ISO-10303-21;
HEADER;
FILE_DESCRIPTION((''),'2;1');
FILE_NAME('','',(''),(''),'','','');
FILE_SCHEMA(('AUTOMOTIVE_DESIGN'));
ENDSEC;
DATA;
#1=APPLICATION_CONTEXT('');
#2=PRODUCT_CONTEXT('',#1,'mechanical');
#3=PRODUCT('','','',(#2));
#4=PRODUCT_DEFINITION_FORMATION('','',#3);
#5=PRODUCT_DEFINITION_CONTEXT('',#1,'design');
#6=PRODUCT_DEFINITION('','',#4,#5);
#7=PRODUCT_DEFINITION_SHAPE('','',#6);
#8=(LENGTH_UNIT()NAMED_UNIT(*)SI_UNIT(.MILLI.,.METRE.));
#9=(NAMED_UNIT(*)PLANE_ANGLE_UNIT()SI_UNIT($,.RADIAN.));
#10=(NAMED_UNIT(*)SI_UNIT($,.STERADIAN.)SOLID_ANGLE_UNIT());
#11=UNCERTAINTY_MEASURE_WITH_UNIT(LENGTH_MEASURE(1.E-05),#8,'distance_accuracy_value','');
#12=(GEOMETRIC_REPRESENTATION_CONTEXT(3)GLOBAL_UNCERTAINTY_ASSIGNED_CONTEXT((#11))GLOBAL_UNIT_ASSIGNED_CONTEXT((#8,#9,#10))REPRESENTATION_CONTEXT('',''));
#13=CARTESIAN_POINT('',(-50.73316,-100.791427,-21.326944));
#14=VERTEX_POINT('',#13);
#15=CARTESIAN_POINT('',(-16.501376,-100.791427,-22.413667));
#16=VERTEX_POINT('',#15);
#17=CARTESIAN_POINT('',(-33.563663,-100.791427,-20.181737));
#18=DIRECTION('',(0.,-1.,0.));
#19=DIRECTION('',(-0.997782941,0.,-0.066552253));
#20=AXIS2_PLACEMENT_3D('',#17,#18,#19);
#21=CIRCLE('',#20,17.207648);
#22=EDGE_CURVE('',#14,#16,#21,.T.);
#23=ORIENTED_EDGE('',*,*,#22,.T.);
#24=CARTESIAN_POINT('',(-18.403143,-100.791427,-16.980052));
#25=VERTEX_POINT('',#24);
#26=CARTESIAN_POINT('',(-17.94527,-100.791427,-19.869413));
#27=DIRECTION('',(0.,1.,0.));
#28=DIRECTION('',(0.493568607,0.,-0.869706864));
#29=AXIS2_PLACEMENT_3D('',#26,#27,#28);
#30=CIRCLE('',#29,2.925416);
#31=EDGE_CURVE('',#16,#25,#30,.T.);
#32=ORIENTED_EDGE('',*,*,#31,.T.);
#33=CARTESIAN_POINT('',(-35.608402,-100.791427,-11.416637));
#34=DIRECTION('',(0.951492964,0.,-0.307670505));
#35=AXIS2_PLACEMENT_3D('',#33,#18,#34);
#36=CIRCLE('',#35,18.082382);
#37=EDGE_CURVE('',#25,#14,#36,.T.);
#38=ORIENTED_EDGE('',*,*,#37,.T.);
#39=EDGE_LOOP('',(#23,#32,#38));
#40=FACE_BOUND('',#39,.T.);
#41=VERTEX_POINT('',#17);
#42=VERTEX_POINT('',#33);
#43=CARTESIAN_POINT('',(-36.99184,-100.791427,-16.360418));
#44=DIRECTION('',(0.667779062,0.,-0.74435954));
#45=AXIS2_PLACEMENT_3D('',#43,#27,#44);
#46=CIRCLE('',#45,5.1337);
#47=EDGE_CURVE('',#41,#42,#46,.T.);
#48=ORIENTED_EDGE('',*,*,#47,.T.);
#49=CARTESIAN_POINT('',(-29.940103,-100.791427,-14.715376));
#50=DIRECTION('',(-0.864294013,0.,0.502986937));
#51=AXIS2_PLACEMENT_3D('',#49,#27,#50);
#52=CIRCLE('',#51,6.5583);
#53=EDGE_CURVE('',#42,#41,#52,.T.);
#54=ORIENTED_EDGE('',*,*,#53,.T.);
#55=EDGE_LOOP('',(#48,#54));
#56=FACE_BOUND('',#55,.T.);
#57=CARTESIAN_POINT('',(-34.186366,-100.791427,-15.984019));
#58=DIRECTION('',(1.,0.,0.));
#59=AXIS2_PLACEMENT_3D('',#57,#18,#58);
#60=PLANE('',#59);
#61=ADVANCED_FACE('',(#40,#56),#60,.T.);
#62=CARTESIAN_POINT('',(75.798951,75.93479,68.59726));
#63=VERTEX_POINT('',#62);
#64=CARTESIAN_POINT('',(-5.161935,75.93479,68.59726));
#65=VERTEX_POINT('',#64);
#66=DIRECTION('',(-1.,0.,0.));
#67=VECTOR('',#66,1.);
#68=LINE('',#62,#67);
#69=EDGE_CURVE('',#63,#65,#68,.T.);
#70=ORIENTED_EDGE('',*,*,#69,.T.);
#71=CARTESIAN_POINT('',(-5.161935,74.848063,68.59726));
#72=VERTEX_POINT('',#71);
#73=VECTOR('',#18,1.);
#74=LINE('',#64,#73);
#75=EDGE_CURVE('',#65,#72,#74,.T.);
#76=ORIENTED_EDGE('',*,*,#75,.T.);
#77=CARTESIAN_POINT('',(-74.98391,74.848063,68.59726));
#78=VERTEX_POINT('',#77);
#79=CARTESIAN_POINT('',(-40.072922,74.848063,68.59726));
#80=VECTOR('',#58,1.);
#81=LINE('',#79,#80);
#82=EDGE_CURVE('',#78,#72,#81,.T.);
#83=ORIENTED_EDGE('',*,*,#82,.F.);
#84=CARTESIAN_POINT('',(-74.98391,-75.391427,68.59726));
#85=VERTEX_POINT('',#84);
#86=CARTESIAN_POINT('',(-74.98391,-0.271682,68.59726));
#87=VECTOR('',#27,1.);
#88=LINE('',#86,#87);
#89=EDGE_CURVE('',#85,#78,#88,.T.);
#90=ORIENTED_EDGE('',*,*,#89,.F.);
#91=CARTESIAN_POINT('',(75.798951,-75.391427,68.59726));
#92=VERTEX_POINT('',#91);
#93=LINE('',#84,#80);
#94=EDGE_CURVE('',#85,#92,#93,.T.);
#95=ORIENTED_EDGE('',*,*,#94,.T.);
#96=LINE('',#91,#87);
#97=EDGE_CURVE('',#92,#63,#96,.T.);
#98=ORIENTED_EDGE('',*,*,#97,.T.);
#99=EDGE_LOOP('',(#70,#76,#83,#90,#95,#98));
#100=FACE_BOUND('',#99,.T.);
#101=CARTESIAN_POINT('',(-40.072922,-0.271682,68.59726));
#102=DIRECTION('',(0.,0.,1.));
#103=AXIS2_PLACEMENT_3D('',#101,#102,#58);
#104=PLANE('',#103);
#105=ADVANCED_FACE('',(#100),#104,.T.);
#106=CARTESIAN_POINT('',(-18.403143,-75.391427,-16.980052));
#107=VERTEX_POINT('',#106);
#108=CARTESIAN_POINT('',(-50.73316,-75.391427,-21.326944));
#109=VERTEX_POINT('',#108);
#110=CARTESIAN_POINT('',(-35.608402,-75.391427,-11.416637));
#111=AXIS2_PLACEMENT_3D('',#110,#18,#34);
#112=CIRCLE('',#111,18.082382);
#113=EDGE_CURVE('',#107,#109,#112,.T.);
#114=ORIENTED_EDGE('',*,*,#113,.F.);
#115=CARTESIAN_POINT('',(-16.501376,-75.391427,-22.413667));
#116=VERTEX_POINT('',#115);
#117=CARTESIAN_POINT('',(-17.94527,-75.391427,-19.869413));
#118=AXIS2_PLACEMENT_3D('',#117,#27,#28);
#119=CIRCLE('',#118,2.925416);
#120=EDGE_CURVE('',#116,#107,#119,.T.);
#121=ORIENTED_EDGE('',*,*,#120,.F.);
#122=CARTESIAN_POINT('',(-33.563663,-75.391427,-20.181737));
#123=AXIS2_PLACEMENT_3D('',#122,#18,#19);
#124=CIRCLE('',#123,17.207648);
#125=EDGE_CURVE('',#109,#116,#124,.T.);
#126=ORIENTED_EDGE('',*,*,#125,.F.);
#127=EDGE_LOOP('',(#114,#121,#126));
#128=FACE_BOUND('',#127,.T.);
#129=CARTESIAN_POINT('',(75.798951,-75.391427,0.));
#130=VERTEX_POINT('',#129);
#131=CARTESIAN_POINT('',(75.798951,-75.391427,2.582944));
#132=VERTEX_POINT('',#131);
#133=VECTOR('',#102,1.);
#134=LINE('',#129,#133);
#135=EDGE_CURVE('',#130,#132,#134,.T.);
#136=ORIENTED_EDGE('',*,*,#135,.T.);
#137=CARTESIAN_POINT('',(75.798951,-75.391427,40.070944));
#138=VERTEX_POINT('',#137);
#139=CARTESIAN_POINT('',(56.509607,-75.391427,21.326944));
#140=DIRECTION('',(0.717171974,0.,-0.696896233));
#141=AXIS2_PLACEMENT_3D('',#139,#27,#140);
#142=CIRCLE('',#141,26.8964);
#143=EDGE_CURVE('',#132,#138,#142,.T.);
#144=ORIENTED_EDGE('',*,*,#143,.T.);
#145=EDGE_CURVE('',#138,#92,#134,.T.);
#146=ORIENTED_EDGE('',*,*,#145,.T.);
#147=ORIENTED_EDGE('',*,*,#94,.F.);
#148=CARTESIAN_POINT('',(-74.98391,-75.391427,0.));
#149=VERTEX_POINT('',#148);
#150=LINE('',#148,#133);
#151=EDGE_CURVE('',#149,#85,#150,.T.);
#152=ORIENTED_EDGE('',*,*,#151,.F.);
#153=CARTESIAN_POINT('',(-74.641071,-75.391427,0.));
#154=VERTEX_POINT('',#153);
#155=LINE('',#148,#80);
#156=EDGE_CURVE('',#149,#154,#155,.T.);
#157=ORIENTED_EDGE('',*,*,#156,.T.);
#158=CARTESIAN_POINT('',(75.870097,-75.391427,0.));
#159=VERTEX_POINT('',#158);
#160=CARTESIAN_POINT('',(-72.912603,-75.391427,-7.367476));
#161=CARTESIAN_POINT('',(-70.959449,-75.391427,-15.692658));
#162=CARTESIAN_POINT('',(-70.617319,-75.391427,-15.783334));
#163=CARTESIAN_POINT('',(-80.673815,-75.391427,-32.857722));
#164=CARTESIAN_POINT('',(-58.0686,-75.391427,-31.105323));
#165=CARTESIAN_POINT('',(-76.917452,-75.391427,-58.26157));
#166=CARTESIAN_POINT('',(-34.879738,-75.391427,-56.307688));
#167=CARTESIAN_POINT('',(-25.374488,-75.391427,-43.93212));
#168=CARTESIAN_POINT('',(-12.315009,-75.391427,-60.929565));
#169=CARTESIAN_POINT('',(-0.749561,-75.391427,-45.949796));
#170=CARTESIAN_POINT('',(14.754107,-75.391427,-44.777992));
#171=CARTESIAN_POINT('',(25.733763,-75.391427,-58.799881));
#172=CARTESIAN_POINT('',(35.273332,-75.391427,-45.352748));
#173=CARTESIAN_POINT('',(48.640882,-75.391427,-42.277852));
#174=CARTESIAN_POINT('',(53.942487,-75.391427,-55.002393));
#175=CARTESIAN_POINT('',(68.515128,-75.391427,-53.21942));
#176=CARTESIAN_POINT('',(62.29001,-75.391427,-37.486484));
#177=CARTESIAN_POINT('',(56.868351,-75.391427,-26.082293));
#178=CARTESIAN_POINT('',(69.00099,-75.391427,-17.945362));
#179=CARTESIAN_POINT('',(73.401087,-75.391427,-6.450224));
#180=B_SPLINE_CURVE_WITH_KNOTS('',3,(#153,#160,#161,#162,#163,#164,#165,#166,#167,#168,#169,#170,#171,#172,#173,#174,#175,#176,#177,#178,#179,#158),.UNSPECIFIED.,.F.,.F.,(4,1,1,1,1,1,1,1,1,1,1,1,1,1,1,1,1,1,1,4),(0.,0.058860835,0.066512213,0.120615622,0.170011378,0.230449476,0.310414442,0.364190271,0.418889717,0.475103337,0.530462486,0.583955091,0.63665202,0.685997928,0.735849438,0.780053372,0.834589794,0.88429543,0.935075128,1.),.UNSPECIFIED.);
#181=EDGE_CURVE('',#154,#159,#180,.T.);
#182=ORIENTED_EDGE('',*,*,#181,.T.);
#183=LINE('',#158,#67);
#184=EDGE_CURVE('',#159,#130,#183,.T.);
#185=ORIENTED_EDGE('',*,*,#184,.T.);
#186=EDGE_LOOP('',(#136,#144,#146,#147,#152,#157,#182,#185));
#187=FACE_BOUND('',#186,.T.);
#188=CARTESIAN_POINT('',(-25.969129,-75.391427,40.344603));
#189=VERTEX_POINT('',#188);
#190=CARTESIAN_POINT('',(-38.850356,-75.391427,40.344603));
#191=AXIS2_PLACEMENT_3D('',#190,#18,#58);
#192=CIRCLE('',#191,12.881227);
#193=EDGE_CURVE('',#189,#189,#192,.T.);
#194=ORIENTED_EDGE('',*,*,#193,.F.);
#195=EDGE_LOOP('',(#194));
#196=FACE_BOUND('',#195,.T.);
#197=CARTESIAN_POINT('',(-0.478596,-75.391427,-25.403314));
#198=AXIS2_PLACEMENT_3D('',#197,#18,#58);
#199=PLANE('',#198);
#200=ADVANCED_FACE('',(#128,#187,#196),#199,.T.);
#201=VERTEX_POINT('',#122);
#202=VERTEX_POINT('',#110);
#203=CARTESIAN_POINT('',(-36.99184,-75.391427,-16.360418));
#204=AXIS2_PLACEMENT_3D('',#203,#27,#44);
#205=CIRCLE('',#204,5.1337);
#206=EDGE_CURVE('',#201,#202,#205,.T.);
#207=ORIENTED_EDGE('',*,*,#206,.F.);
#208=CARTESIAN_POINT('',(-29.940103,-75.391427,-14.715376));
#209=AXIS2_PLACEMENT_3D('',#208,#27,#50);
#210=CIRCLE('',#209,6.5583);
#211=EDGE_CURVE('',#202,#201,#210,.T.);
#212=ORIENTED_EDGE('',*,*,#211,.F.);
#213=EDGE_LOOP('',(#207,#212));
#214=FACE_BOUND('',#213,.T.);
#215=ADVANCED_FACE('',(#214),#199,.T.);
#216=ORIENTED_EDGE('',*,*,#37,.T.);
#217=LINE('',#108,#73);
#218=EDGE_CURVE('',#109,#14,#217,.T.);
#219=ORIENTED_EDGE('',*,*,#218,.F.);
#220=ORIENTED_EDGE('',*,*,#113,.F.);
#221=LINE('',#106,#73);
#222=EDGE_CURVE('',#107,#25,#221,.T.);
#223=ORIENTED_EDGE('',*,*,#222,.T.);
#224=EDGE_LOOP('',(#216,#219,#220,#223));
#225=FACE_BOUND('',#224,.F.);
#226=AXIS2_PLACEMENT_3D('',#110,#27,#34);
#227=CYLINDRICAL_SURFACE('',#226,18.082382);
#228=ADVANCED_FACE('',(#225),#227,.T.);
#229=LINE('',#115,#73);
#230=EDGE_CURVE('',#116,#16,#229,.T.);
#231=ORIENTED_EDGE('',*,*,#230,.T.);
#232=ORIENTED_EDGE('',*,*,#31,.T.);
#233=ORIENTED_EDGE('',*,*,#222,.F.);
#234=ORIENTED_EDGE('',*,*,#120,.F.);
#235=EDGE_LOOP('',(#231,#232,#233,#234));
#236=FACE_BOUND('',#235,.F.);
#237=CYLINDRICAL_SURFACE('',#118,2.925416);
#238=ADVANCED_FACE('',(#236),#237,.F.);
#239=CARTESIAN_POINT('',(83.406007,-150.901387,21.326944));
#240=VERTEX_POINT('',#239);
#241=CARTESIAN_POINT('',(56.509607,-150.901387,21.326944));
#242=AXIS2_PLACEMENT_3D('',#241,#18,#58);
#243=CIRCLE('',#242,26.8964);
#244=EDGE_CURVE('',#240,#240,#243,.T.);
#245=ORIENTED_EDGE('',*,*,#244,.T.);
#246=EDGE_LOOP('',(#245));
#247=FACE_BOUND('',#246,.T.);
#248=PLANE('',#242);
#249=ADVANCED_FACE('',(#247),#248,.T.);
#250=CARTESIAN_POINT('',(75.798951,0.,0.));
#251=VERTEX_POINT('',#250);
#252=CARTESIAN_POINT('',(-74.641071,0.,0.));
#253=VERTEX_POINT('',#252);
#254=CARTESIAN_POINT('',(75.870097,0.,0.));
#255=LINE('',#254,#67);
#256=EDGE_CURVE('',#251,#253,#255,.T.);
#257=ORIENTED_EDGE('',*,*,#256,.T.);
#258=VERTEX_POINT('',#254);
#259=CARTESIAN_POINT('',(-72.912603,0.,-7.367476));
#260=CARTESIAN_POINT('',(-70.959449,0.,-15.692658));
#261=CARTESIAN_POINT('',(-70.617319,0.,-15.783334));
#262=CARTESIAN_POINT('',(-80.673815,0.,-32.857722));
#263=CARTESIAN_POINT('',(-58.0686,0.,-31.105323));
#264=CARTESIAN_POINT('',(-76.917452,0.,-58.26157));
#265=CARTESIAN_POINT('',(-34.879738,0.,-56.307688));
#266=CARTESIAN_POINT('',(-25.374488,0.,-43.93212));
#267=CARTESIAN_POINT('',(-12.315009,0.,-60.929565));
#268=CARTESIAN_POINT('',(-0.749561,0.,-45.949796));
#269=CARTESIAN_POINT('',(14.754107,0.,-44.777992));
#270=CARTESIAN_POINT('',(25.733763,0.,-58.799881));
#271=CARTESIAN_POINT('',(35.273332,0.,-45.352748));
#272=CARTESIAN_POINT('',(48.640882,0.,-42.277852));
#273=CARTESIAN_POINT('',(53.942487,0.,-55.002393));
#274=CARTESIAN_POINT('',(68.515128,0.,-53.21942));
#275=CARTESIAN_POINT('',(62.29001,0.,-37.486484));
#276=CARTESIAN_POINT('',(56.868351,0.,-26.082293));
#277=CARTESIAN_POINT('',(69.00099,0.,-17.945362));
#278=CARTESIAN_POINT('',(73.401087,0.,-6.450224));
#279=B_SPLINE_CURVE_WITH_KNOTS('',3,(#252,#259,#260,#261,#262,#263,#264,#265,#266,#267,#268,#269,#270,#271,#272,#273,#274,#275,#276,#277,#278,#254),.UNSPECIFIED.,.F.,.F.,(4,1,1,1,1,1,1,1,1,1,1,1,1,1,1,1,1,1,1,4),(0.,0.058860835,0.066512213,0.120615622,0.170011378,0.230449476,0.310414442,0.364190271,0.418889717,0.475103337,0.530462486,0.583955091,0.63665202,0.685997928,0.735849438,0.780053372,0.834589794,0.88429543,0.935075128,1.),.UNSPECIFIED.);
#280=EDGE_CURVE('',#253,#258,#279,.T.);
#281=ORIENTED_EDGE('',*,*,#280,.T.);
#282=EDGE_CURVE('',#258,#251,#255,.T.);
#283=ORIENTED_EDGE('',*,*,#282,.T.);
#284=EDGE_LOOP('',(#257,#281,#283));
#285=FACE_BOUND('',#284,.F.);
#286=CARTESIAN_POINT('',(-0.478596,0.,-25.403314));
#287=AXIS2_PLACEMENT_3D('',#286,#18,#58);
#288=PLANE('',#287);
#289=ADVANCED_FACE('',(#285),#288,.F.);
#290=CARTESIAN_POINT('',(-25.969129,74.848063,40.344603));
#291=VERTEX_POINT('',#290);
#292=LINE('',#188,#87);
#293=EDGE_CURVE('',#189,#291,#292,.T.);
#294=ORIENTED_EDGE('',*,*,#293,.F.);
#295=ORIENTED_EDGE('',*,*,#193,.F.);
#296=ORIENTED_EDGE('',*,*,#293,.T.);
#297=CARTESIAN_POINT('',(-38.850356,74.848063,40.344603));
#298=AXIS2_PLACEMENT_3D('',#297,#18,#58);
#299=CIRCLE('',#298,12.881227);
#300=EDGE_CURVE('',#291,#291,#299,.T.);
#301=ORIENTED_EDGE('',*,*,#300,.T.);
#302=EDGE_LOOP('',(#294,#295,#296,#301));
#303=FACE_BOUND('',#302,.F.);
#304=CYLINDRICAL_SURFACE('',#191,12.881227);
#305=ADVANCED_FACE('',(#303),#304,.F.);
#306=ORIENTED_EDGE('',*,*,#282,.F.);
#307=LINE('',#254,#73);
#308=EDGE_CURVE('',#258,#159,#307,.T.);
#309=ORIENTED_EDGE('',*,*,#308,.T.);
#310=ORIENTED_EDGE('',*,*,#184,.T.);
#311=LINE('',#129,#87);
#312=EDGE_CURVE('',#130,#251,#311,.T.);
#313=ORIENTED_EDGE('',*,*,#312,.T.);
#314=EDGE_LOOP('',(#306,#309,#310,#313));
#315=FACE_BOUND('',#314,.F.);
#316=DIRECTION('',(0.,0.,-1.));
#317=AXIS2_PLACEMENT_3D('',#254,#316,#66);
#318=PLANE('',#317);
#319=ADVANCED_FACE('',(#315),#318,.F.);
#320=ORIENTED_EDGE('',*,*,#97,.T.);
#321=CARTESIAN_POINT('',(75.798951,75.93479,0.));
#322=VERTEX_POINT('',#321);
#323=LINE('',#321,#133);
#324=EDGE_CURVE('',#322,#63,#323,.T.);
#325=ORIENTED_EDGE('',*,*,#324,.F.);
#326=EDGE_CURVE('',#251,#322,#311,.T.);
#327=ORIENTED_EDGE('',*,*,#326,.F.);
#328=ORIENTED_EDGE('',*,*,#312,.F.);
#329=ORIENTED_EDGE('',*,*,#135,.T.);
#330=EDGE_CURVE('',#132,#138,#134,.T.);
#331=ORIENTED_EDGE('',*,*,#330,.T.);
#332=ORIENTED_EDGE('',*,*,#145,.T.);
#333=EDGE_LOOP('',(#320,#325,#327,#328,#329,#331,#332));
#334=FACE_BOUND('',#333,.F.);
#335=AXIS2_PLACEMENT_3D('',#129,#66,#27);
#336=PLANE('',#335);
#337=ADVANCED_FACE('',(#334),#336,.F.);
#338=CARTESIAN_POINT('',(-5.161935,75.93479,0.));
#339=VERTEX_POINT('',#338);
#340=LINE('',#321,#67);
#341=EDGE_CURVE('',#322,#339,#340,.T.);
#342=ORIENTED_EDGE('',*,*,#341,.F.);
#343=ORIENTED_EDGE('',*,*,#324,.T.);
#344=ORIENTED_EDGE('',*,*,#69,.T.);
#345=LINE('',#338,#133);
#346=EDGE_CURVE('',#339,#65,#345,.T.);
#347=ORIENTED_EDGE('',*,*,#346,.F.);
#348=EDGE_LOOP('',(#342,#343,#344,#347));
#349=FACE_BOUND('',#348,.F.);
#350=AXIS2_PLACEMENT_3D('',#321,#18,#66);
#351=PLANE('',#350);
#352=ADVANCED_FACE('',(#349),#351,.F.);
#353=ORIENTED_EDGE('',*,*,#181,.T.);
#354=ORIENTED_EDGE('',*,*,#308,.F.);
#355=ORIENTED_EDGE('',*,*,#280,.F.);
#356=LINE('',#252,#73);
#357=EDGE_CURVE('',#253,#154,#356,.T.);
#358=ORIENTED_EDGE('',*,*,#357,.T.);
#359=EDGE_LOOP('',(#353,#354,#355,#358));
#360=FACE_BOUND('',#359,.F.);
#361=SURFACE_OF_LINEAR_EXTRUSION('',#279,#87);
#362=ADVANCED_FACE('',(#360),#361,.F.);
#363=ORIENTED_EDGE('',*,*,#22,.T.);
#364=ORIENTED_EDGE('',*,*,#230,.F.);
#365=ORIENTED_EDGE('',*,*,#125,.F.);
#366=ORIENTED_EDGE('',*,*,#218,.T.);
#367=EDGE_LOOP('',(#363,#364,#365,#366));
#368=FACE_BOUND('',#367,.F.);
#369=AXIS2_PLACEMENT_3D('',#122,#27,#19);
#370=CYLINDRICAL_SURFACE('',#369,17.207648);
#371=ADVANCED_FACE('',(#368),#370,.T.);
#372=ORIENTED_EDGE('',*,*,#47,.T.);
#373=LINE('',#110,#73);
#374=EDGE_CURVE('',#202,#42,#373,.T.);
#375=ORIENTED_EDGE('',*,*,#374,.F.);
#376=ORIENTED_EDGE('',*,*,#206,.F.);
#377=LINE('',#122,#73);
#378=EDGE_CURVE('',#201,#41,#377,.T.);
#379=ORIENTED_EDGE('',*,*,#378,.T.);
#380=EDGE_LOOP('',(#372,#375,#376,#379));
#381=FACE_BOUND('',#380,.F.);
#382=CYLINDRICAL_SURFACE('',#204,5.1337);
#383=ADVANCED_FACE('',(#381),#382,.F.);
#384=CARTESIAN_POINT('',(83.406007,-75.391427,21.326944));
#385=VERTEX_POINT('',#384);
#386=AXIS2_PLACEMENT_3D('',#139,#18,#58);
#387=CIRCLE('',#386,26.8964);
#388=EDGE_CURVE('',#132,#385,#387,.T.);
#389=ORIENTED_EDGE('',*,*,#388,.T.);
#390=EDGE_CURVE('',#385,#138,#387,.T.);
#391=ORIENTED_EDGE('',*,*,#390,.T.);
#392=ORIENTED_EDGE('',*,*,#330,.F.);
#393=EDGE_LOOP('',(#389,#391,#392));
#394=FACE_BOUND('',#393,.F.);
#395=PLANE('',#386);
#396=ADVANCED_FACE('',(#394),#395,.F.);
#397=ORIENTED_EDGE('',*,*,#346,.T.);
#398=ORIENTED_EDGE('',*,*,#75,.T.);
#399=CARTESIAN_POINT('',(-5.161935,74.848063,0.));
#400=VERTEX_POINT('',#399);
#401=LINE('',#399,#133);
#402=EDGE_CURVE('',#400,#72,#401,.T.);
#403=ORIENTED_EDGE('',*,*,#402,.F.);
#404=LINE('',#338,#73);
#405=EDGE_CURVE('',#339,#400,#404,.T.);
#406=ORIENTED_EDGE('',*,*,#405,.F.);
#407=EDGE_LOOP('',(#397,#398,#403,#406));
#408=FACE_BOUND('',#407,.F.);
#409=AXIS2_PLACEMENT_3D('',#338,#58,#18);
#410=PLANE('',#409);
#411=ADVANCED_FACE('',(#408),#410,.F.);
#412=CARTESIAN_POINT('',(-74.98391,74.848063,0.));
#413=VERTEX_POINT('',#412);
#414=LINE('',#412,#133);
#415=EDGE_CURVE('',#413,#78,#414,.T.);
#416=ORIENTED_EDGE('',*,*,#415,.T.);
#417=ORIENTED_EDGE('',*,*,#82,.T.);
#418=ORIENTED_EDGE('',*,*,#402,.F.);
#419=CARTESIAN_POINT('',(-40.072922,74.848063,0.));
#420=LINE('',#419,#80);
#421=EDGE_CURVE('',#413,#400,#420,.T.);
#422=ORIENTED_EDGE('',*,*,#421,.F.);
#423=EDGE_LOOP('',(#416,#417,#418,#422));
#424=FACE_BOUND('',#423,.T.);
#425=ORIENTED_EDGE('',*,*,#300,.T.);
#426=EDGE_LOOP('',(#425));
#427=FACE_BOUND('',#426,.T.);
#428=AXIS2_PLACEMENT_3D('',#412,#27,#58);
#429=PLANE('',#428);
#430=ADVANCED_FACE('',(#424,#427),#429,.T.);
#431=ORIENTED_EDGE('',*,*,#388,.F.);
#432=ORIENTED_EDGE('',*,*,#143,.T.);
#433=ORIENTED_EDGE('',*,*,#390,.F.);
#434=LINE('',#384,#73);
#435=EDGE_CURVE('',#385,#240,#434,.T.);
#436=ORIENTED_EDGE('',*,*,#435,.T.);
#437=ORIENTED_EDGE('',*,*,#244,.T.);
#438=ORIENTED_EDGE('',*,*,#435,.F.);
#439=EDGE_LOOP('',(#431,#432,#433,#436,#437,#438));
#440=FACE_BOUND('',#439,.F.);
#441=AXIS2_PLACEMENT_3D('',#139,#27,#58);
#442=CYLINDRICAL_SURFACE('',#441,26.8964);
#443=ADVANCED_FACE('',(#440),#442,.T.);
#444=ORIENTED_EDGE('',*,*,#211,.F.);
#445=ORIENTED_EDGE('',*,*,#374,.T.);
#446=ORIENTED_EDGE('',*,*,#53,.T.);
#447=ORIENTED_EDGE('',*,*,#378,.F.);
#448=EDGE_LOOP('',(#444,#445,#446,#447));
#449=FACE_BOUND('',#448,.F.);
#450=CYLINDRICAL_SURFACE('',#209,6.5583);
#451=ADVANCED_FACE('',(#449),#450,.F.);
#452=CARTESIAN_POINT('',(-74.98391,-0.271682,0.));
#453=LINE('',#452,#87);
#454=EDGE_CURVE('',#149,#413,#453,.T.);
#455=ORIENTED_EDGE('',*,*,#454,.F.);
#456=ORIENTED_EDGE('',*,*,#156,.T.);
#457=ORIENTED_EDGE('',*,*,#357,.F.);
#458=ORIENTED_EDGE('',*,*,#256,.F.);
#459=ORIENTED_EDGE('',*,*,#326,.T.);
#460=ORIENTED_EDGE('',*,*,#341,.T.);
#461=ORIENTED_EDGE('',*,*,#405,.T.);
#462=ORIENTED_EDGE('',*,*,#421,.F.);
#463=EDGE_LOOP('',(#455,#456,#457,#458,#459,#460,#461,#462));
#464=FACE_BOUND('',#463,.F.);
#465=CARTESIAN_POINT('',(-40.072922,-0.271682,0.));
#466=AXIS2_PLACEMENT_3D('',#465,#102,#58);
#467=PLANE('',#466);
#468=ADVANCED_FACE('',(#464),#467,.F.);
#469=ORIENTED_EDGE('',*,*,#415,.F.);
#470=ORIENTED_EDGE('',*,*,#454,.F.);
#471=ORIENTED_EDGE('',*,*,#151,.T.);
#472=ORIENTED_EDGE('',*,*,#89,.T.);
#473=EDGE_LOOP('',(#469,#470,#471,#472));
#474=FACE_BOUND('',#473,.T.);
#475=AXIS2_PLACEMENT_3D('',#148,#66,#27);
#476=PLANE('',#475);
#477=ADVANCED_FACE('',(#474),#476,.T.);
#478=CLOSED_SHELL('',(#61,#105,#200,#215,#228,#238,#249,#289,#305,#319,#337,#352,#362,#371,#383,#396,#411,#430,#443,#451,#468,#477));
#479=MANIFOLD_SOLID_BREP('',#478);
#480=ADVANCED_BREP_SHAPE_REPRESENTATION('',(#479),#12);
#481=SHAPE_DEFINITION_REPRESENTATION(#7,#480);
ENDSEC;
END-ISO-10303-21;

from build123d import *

# Parameters (mm, degrees)
F0_W     = 69.8219751939
F0_H     = 150.2394899726
F1_DEPTH = 68.59726
F2_R     = 12.8812272084
F3_DEPTH = 151.3262167573
F4_R     = 26.8964003772
F5_DEPTH = 75.50996
F7_DEPTH = 75.3914266825
F9_DEPTH = 25.4


with BuildPart() as f1:
    # F0 (on Top) → F1 (new body)
    with BuildSketch(Plane.XY):
        with Locations((-40.0729221292, -0.2716816962)):
            Rectangle(F0_W, F0_H)
        Polygon((-5.1619345322, 75.9347900748), (-5.1619345322, 74.8480632901), (-5.1619345322, -75.3914266825), (75.7989510894, -75.3914266825), (75.7989510894, 75.9347900748), align=None)
    extrude(amount=F1_DEPTH)

    # F2 (on face) → F3 (cut, through all)
    with BuildSketch(Plane.XZ.offset(75.3914266825)):
        with Locations((-38.8503558934, 40.3446033597)):
            Circle(F2_R)
    extrude(amount=-F3_DEPTH, mode=Mode.SUBTRACT)

    # F4 (on face) → F5 (join)
    with BuildSketch(Plane.XZ.offset(75.3914266825)):
        with Locations((56.5096065402, 21.326944232)):
            Circle(F4_R)
    extrude(amount=F5_DEPTH)

    # F6 (on Front) → F7 (join, through all)
    with BuildSketch(Plane.XZ):
        with BuildLine():
            Line((75.8700966835, 0), (-74.64107126, 0))
            add(Edge.make_bspline(
                [(-74.64107126, 0), (-72.9126029737, -7.3674764553), (-70.9594494157, -15.6926583323), (-70.6173188851, -15.7833341551), (-80.6738152373, -32.8577218178), (-58.0686003133, -31.1053232814), (-76.9174521915, -58.2615700065), (-34.8797382228, -56.3076878967), (-25.3744876623, -43.9321196667), (-12.3150093194, -60.9295650154), (-0.7495613738, -45.9497959156), (14.7541074853, -44.777992492), (25.7337633251, -58.7998809192), (35.2733321455, -45.3527476777), (48.6408816788, -42.2778519684), (53.9424871458, -55.0023934283), (68.5151278913, -53.2194204495), (62.2900101587, -37.4864836461), (56.8683509523, -26.0822931742), (69.0009897861, -17.945361749), (73.4010867544, -6.4502237339), (75.8700966835, 0)],
                knots=[0, 0, 0, 0, 0.0588608355, 0.0665122127, 0.1206156222, 0.1700113783, 0.2304494763, 0.3104144422, 0.3641902712, 0.4188897172, 0.4751033368, 0.5304624864, 0.5839550906, 0.6366520196, 0.6859979285, 0.7358494378, 0.7800533718, 0.8345897942, 0.8842954302, 0.9350751281, 1, 1, 1, 1], degree=3))
        make_face()
    extrude(amount=F7_DEPTH)

    # F8 (on face) → F9 (join)
    with BuildSketch(Plane.XZ.offset(75.3914266825)):
        with BuildLine():
            ThreePointArc((-18.4031426907, -16.9800519943), (-38.0179633899, 6.5044832962), (-50.7331602275, -21.326944232))
            ThreePointArc((-50.7331602275, -21.326944232), (-34.109662302, -37.3807196819), (-16.5013764054, -22.4136672914))
            ThreePointArc((-16.5013764054, -22.4136672914), (-20.7064474929, -20.8358259814), (-18.4031426907, -16.9800519943))
        make_face()
        with BuildLine():
            ThreePointArc((-33.5636629552, -20.1817365138), (-41.9913061102, -17.5267023799), (-35.6084015467, -11.4166365264))
            ThreePointArc((-35.6084015467, -11.4166365264), (-23.5532874106, -13.2254475806), (-33.5636629552, -20.1817365138))
        make_face(mode=Mode.SUBTRACT)
    extrude(amount=F9_DEPTH)


solid = f1.part
